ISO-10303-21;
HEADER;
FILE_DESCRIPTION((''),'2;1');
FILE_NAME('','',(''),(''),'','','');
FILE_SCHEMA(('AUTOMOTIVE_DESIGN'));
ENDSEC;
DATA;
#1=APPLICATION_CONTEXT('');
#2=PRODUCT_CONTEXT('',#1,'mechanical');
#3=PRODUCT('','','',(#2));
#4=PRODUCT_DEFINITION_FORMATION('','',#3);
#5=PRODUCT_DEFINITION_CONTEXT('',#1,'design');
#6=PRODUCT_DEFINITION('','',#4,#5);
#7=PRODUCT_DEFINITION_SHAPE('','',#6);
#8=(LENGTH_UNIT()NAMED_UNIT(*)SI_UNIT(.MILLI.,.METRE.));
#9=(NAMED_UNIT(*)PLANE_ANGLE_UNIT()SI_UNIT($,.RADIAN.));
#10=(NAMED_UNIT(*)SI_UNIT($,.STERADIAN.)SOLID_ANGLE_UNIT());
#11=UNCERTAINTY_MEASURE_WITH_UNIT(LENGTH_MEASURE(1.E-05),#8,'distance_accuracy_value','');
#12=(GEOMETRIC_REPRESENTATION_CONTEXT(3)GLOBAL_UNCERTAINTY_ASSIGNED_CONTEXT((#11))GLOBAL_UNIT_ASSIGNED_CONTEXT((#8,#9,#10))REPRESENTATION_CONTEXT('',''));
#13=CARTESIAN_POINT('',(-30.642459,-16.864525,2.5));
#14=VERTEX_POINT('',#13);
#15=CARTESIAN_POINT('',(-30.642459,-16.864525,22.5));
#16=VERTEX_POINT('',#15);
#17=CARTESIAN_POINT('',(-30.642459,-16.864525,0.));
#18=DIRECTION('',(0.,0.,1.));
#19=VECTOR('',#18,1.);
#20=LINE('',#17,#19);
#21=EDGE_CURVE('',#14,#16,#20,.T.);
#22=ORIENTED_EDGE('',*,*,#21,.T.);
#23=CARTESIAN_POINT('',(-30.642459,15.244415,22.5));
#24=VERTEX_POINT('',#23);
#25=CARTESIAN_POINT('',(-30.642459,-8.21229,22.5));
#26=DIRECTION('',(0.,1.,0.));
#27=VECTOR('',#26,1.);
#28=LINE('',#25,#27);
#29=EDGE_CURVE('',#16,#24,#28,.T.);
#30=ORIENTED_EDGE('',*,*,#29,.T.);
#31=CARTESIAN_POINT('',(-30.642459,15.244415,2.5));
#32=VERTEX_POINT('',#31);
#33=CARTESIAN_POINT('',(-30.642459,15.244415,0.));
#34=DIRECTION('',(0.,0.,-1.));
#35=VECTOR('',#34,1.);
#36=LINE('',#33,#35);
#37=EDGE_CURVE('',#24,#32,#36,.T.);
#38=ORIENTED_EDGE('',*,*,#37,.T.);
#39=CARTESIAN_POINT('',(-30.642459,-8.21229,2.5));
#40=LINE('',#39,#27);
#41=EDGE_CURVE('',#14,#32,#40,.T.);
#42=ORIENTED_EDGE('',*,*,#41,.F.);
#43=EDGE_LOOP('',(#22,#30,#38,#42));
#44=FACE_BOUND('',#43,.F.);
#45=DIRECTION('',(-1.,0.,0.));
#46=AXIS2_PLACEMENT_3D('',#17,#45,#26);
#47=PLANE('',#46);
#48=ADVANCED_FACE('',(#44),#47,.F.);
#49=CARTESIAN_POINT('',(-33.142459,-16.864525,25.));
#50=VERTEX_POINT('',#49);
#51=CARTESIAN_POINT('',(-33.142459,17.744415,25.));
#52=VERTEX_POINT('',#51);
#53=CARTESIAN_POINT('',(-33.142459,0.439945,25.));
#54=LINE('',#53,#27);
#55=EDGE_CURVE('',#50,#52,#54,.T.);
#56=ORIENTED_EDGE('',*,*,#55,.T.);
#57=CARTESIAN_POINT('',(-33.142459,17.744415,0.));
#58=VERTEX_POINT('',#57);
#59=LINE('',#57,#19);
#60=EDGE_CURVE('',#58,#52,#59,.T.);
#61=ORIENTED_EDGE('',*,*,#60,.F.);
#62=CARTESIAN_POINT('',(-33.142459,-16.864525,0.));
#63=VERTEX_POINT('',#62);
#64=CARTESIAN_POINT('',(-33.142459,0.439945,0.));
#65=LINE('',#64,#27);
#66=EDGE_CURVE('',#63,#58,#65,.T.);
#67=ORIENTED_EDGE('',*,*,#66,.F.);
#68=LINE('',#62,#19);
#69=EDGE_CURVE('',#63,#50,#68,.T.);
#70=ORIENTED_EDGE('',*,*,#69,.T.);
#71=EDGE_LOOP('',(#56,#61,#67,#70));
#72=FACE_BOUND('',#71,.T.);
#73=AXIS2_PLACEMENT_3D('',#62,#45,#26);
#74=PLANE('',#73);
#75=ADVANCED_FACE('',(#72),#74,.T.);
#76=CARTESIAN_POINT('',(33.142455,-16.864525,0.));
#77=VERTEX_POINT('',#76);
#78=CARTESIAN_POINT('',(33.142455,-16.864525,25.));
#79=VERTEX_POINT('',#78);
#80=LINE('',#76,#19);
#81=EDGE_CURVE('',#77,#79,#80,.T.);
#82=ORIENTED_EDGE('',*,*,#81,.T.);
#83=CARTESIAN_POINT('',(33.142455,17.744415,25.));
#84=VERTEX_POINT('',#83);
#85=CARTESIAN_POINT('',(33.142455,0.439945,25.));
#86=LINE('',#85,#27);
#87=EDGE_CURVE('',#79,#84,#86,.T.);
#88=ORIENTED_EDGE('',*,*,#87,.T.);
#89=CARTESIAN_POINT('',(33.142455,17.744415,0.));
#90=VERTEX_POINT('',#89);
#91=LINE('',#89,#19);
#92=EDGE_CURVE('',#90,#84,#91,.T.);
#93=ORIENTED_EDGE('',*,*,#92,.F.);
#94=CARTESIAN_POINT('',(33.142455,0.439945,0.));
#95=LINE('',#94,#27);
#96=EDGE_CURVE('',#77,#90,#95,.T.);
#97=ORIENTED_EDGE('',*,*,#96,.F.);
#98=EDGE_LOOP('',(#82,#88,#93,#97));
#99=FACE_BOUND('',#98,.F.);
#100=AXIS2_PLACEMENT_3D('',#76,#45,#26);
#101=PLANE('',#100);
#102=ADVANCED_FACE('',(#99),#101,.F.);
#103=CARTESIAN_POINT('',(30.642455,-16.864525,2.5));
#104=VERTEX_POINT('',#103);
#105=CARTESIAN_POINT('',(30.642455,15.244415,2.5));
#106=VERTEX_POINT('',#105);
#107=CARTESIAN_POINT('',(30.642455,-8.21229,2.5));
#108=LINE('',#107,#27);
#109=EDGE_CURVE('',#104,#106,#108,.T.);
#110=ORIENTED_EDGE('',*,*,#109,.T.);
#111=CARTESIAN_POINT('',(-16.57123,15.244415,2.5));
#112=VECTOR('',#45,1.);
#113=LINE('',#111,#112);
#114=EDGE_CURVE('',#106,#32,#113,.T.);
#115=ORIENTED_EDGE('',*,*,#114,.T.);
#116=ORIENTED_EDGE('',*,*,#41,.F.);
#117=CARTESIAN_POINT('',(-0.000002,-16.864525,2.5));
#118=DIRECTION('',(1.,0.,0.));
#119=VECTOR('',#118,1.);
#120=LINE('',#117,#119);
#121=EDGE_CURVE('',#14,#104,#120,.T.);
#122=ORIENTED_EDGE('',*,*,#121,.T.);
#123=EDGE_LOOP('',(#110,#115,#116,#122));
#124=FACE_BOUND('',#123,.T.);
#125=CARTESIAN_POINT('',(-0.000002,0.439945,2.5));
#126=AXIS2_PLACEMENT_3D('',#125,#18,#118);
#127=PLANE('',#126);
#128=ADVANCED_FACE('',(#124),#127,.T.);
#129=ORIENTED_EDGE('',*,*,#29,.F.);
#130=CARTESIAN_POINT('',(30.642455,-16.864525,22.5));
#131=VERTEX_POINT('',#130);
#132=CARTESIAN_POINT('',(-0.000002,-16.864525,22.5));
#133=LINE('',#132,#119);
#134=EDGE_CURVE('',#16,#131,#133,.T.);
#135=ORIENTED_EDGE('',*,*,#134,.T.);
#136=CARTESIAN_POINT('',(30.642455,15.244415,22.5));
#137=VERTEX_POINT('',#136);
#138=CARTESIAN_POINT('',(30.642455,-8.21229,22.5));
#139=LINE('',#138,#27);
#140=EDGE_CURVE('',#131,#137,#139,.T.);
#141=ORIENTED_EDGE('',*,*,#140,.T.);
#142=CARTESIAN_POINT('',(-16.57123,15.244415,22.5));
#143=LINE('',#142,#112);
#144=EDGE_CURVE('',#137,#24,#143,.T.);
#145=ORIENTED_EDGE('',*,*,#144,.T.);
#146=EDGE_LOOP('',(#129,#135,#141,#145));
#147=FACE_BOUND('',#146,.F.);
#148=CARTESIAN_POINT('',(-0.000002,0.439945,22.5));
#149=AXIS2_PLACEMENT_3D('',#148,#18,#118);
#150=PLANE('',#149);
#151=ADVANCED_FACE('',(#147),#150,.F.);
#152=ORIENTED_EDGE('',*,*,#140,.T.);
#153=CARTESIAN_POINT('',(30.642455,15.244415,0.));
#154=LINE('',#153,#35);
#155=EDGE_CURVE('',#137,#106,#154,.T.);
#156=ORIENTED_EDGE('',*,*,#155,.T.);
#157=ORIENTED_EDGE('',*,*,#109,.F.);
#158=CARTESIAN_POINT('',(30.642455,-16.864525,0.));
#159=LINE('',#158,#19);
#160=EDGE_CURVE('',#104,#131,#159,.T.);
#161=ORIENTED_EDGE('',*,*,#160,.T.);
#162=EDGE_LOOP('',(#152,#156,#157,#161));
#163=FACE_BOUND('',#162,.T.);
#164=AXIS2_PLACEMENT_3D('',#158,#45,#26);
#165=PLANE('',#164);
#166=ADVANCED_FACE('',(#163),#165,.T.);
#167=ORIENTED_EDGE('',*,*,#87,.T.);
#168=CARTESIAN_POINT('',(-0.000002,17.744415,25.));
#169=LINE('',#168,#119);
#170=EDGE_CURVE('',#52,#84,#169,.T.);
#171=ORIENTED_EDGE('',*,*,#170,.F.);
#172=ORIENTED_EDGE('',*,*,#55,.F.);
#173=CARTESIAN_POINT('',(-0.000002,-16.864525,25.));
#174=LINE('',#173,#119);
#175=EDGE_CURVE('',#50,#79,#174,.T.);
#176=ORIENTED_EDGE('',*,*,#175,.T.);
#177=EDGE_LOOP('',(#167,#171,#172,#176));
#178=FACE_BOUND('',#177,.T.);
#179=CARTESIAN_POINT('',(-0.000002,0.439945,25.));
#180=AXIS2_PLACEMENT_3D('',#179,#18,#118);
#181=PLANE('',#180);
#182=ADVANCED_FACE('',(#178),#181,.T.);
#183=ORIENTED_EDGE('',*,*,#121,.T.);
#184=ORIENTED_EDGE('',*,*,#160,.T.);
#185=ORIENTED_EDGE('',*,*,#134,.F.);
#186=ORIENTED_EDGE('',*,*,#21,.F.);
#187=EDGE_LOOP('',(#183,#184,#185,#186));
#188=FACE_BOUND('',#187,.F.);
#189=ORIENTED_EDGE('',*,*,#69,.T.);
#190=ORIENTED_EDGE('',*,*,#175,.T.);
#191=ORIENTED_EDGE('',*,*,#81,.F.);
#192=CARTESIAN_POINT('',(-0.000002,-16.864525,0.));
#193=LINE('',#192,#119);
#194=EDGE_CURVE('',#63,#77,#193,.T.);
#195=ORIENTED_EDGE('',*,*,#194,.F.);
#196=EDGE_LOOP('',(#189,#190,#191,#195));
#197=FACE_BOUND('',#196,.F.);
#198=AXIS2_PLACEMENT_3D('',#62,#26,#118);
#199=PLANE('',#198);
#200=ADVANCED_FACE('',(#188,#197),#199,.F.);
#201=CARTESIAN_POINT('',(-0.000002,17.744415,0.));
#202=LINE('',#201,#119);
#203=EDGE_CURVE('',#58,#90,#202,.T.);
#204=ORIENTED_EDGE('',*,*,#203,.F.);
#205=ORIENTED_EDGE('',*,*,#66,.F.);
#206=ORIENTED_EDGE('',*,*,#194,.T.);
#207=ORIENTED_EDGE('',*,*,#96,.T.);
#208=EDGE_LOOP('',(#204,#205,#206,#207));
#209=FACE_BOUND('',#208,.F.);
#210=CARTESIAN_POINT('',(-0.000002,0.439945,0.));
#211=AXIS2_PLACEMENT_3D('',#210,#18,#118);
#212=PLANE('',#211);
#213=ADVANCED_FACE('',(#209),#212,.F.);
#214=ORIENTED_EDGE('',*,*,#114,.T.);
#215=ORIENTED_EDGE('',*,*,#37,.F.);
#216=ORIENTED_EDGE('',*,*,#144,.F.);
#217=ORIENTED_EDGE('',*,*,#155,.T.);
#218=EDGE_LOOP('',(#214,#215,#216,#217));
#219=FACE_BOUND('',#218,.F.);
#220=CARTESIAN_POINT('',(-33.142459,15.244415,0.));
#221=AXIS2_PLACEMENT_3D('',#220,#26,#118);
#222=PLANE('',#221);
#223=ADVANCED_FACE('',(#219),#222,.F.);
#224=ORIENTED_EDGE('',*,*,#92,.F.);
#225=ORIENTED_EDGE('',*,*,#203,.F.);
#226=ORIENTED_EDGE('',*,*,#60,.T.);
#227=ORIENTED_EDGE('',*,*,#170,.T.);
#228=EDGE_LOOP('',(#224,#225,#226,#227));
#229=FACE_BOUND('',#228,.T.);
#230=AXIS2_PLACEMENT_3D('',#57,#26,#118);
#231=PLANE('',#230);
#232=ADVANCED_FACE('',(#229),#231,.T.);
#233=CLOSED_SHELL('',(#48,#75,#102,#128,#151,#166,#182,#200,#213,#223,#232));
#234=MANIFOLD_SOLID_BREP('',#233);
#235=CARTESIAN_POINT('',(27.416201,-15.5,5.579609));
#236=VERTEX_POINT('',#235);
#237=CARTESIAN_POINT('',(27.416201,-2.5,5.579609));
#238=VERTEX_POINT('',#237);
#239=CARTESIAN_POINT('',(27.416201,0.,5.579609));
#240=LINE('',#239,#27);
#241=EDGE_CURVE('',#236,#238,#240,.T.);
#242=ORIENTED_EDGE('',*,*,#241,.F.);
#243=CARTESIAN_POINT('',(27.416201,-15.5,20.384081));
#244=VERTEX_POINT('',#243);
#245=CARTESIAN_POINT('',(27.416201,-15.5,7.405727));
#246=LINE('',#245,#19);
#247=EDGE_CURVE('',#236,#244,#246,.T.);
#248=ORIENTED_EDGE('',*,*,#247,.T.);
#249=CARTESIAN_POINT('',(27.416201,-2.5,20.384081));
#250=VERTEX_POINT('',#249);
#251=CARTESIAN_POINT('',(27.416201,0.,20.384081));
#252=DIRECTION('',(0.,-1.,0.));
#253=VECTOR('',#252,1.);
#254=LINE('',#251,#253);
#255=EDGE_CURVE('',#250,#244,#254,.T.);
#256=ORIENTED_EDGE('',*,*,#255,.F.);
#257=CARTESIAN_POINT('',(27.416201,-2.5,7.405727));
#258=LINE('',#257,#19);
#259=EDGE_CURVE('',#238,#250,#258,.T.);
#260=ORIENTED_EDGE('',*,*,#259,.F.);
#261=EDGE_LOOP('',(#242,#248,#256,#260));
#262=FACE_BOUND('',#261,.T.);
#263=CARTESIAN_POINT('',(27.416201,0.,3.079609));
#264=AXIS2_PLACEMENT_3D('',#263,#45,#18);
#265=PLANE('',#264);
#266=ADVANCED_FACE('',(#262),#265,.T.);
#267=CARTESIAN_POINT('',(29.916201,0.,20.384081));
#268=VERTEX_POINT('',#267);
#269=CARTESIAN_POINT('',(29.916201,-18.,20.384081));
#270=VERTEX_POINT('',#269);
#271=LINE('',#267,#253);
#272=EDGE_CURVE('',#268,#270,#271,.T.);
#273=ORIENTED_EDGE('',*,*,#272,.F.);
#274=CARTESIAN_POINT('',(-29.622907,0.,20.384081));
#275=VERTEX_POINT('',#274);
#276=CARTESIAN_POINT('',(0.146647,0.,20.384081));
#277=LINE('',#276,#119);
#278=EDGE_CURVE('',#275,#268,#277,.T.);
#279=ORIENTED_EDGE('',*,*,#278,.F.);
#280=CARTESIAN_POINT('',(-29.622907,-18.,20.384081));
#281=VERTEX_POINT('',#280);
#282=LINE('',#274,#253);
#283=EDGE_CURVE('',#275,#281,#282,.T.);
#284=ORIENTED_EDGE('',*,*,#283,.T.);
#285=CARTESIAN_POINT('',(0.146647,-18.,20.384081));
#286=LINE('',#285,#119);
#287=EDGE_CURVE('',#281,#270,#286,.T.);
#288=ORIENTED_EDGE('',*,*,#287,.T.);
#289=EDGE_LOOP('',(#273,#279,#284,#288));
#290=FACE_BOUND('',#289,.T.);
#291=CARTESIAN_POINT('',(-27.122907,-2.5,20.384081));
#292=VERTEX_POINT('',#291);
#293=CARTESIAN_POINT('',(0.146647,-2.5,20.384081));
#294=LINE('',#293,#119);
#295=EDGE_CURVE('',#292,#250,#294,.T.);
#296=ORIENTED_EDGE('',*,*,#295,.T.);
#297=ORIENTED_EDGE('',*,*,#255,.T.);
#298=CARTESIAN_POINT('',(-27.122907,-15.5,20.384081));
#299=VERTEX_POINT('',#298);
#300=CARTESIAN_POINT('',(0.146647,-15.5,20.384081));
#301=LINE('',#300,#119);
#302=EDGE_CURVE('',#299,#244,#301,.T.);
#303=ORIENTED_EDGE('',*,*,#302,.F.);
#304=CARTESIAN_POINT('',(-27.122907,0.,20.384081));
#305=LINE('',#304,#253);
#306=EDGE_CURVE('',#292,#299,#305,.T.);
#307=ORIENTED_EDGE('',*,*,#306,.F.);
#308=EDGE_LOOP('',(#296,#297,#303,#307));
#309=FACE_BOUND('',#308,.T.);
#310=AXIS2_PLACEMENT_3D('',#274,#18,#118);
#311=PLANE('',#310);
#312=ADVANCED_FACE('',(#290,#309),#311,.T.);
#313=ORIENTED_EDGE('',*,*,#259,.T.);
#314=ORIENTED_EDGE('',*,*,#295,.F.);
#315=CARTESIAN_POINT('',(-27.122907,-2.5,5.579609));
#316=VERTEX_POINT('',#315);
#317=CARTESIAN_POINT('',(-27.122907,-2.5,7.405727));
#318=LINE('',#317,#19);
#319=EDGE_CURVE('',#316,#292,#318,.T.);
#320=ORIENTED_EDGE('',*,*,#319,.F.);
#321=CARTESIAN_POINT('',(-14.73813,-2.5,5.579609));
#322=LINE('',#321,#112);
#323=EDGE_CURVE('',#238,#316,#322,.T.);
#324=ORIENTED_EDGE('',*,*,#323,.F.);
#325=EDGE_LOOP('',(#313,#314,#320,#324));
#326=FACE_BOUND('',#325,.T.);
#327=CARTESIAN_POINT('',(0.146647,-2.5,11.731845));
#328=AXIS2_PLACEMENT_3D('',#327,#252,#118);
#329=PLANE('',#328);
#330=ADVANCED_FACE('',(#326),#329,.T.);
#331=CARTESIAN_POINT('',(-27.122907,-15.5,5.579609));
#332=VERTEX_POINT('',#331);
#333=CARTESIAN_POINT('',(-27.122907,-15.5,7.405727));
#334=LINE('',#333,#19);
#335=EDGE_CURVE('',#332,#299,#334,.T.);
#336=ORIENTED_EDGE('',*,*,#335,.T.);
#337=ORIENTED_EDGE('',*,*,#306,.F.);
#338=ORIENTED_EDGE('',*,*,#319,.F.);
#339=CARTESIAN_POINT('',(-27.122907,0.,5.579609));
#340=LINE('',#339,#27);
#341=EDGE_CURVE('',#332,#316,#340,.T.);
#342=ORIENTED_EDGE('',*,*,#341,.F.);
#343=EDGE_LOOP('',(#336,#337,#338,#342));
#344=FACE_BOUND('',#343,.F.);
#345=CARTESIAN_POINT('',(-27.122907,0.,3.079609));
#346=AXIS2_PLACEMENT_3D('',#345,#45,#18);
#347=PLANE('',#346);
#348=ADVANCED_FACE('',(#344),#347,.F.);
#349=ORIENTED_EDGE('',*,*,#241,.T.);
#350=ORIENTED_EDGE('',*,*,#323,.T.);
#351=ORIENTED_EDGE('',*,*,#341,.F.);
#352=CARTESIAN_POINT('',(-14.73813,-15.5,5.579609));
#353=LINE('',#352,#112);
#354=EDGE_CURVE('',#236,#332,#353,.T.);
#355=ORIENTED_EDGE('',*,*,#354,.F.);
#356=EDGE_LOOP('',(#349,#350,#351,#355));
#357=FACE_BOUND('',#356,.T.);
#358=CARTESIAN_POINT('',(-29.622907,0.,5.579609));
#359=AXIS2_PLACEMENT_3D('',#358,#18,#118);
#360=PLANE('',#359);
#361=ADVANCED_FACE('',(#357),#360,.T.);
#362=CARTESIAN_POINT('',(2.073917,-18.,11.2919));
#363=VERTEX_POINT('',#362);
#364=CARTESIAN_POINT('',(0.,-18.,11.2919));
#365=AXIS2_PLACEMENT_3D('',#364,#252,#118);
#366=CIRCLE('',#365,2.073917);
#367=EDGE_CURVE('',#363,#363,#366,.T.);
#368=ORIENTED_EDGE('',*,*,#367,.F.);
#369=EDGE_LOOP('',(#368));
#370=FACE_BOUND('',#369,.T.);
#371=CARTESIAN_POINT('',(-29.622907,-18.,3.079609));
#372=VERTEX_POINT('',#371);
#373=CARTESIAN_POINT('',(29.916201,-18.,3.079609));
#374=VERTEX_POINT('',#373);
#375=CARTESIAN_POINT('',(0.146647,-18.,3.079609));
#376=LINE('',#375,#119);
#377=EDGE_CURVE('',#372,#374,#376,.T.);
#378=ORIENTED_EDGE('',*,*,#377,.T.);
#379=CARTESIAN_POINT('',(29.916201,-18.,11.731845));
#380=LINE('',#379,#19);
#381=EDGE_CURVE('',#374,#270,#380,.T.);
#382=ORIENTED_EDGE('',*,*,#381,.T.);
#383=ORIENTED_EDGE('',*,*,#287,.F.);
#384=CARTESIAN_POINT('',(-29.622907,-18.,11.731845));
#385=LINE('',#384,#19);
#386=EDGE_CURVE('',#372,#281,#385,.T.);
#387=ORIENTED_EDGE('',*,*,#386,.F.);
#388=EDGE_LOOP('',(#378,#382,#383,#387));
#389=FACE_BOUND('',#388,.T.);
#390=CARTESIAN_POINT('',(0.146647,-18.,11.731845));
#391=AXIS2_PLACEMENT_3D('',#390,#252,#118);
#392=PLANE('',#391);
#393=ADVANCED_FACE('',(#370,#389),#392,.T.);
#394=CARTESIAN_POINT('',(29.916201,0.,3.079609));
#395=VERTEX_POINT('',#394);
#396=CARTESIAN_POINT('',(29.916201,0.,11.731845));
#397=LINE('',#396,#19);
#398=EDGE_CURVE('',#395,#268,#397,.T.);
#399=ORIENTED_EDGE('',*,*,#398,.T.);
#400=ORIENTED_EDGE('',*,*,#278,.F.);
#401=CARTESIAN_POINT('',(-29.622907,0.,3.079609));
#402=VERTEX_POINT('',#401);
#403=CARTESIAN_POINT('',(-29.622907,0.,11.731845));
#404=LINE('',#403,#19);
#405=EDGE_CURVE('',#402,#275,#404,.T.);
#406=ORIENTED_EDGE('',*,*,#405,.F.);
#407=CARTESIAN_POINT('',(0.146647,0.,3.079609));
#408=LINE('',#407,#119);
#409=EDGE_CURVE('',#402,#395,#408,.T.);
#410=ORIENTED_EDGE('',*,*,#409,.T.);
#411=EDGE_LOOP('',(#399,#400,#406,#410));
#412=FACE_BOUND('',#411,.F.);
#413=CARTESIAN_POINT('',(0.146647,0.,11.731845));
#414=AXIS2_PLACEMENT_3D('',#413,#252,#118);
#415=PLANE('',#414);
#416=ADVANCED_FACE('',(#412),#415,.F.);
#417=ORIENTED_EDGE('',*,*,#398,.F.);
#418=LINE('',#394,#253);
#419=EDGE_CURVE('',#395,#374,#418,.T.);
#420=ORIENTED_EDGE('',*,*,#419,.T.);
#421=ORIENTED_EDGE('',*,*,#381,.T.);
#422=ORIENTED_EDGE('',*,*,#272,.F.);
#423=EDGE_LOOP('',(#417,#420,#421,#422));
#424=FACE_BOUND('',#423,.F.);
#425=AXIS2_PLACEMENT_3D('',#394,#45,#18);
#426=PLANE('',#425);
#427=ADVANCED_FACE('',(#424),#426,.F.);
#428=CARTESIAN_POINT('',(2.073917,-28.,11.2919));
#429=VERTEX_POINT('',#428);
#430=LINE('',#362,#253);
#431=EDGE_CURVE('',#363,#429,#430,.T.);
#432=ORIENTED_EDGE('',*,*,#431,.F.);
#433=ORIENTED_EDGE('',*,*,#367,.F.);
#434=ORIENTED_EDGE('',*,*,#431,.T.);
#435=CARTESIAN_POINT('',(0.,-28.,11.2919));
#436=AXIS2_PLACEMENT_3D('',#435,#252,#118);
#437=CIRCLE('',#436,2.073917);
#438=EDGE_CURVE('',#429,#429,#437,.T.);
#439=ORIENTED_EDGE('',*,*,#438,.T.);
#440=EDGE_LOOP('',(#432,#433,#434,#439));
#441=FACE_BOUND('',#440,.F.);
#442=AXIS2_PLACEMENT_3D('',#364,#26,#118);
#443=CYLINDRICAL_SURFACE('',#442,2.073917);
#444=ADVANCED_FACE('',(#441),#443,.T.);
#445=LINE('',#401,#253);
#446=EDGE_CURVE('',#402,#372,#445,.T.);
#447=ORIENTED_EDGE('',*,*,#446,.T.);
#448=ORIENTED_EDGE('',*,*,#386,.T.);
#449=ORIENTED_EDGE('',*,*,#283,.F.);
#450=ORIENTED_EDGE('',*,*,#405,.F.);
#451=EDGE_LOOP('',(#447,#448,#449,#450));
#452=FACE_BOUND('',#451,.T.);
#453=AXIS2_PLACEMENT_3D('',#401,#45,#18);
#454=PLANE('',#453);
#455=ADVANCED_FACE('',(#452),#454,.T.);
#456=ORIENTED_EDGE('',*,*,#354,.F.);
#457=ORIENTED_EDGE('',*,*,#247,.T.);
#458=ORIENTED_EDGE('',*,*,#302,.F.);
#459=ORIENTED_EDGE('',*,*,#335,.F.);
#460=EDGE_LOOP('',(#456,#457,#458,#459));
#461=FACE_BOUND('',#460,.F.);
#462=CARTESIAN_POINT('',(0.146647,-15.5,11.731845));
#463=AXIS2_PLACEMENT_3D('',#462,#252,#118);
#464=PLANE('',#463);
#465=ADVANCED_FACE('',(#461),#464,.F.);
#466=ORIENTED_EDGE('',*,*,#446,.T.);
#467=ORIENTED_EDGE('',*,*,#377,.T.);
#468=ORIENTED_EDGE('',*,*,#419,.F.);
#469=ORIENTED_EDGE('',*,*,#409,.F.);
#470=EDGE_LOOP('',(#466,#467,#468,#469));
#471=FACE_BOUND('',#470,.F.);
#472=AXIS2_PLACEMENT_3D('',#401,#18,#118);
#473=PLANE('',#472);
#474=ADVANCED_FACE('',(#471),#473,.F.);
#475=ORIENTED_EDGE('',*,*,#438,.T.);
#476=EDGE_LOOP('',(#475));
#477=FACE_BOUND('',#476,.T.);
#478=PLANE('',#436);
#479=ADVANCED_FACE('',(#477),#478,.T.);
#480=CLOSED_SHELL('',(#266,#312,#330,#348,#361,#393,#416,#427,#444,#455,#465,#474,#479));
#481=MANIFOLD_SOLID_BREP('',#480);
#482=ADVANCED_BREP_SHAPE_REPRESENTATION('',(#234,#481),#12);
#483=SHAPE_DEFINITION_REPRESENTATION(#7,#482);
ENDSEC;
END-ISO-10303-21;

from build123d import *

# Parameters (mm, degrees)
F0_W     = 66.2849135697
F0_H     = 34.6089396626
F1_DEPTH = 25
F2_T     = -2.5
F3_W     = 59.5391076058
F3_H     = 17.3044716939
F4_DEPTH = 18
F5_T     = -2.5
F6_R     = 2.0739167643
F7_DEPTH = 10


# Not quite as in the source:
# - the program builds the solid bodies; features that only make, move or delete a surface that nothing else refers to are left out


with BuildPart() as f1:
    # F0 (on Top) → F1 (new body)
    with BuildSketch(Plane.XY):
        with Locations((-1.8626e-06, 0.4399446771)):
            Rectangle(F0_W, F0_H)
    extrude(amount=F1_DEPTH)

    # F2
    f2_openings = [f1.faces().sort_by_distance(p)[0] for p in [
        (-2e-06, -16.864525, 12.5),
    ]]
    offset(amount=F2_T, openings=f2_openings)


with BuildPart() as f4:
    # F3 (on Front) → F4 (new body)
    with BuildSketch(Plane.XZ):
        with Locations((0.1466469839, 11.7318448611)):
            Rectangle(F3_W, F3_H)
    extrude(amount=F4_DEPTH)

    # F5
    f5_openings = [f4.faces().sort_by_distance(p)[0] for p in [
        (0.146647, -9, 20.384081),
    ]]
    offset(amount=F5_T, openings=f5_openings)

    # F6 (on face) → F7 (join)
    with BuildSketch(Plane.XZ.offset(18)):
        with Locations((0, 11.2918997183)):
            Circle(F6_R)
    extrude(amount=F7_DEPTH)


solid = Compound([f1.part, f4.part])
